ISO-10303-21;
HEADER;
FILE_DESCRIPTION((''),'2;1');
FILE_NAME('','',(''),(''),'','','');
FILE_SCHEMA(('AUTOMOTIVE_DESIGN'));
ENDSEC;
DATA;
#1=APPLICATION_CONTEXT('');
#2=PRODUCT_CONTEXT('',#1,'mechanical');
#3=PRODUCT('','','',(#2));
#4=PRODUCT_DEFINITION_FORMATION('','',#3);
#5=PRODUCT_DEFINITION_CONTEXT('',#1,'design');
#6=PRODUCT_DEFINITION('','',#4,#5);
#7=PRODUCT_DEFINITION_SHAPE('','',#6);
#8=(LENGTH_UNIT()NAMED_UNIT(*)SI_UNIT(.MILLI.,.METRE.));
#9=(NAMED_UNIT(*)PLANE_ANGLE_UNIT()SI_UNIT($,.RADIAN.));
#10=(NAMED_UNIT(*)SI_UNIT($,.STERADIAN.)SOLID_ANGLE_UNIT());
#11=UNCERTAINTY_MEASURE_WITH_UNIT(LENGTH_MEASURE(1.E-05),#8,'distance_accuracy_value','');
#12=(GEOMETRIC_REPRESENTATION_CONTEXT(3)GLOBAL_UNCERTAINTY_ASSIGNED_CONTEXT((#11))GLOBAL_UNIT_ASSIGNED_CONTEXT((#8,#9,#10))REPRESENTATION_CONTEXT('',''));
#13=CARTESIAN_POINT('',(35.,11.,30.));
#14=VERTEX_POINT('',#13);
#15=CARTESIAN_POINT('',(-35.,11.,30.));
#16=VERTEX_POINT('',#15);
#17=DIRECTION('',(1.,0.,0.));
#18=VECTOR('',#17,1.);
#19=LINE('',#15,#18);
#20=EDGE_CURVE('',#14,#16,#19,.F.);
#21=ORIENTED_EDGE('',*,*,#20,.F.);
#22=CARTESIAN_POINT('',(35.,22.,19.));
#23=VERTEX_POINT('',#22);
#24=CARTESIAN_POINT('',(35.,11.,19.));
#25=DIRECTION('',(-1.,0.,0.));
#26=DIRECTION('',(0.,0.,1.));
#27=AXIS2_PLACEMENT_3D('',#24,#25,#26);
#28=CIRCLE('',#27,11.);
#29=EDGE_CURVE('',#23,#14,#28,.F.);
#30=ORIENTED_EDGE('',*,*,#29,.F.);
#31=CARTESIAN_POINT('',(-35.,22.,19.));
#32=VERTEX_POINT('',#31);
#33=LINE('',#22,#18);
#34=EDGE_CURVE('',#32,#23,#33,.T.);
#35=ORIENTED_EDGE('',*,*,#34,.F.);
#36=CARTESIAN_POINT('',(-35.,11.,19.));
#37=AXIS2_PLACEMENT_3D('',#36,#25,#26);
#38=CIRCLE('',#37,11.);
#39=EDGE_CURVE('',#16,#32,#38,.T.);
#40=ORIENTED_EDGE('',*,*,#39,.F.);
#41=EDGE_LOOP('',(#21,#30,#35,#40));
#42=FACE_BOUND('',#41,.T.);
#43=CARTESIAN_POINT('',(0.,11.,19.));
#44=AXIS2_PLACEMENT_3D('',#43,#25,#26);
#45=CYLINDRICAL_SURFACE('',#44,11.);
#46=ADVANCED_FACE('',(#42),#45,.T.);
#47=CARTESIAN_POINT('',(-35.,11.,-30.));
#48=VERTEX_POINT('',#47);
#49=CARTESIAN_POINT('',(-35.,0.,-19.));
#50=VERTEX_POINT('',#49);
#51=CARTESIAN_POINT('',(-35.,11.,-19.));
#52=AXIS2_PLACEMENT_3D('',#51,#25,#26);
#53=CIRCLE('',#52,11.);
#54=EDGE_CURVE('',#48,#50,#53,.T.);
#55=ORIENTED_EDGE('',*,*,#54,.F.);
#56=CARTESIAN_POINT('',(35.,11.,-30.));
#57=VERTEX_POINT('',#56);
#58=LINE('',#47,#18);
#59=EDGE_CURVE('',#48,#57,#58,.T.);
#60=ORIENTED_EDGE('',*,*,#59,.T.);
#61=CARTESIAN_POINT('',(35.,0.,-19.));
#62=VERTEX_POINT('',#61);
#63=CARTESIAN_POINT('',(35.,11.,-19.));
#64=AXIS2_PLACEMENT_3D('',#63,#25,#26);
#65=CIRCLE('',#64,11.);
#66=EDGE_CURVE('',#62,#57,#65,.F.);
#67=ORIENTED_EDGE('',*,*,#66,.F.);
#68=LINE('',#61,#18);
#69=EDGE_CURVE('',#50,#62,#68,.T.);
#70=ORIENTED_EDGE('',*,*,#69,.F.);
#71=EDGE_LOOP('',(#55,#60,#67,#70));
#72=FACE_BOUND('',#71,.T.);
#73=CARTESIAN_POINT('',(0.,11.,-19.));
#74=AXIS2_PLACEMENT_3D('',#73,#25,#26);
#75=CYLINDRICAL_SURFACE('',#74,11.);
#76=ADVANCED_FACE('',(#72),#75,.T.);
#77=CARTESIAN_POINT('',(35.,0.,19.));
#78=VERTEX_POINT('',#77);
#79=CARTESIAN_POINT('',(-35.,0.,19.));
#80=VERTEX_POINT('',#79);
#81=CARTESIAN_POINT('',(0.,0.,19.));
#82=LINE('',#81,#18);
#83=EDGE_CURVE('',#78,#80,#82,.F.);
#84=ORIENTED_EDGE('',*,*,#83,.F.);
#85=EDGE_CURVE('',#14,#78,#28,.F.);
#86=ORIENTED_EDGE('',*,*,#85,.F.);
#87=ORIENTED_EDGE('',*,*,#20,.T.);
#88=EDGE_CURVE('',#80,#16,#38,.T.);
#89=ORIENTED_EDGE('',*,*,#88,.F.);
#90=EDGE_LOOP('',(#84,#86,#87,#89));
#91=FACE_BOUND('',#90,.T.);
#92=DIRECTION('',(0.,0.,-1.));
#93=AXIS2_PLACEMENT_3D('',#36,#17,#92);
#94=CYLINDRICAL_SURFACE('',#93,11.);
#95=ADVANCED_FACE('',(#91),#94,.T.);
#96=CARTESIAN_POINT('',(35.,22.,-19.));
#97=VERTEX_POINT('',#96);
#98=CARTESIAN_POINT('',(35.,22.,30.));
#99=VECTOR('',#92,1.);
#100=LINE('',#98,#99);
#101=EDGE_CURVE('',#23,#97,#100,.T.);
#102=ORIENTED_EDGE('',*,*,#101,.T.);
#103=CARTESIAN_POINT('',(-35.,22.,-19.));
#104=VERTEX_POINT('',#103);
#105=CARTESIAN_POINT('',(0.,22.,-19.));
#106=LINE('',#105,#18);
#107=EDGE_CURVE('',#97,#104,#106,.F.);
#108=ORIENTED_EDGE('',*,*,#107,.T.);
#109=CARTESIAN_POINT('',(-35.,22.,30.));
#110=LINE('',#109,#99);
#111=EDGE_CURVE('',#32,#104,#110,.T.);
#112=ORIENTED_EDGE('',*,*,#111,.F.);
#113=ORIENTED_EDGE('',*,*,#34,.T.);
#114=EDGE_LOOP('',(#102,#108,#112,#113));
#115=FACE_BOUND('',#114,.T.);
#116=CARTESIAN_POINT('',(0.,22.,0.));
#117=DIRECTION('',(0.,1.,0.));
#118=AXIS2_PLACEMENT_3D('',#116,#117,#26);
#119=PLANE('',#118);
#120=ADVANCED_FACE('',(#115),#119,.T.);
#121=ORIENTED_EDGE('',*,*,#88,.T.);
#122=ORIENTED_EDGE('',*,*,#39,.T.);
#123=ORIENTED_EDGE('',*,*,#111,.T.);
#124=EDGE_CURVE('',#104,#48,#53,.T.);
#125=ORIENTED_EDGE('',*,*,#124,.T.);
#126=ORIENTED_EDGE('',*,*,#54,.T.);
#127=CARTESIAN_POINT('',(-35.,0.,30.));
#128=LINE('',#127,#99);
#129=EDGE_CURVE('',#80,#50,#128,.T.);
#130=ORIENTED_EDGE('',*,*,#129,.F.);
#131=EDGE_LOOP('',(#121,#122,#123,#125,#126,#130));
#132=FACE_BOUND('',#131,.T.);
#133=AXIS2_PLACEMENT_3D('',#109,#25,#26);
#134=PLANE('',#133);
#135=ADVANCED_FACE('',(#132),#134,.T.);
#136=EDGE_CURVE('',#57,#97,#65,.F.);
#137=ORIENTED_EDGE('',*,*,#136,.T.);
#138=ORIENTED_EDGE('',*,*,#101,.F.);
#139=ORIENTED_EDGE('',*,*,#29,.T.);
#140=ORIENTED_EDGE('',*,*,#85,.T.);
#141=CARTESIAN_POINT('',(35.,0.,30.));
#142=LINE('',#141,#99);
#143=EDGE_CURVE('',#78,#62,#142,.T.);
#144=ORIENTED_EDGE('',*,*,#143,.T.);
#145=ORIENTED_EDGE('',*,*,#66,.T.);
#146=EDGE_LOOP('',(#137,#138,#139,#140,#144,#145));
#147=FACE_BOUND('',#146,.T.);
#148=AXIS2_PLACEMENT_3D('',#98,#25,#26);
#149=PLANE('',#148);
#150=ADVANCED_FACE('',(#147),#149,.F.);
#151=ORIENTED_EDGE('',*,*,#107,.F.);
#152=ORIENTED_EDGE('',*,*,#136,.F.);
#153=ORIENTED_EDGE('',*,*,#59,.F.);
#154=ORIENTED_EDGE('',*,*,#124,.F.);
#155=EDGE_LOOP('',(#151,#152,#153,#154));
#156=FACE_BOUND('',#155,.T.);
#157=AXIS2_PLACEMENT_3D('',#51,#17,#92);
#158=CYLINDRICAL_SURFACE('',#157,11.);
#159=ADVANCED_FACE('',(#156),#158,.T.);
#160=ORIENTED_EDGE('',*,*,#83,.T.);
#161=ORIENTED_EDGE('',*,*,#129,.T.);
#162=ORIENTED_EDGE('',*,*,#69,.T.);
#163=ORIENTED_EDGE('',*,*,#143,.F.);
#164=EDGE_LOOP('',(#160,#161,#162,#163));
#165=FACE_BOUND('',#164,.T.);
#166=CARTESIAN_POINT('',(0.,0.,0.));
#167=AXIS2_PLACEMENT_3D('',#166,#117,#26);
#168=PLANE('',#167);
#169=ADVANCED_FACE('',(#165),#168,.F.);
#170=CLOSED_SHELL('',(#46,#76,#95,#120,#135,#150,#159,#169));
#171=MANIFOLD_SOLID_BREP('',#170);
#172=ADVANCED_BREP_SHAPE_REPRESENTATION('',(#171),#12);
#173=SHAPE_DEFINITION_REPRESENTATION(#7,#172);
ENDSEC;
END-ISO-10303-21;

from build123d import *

# Parameters (mm, degrees)
SKETCH_1_W      = 70
SKETCH_1_H      = 60
EXTRUDE_1_DEPTH = 22
FILLET_1_R      = 11


with BuildPart() as part:
    # 草图1 → 凸台-拉伸1 (new body)
    with BuildSketch(Plane(origin=(0, 0, 0), x_dir=(1, 0, 0), z_dir=(0, 1, 0))):
        Rectangle(SKETCH_1_W, SKETCH_1_H)
    extrude(amount=EXTRUDE_1_DEPTH)

    # 圆角1
    fillet_1_edges = [part.edges().sort_by_distance(p)[0] for p in [
        (0, 0, -30),
        (0, 22, -30),
        (0, 0, 30),
        (0, 22, 30),
    ]]
    fillet(fillet_1_edges, radius=FILLET_1_R - 0.0001)  # a hair under: the kernel refuses the full size


solid = part.part
